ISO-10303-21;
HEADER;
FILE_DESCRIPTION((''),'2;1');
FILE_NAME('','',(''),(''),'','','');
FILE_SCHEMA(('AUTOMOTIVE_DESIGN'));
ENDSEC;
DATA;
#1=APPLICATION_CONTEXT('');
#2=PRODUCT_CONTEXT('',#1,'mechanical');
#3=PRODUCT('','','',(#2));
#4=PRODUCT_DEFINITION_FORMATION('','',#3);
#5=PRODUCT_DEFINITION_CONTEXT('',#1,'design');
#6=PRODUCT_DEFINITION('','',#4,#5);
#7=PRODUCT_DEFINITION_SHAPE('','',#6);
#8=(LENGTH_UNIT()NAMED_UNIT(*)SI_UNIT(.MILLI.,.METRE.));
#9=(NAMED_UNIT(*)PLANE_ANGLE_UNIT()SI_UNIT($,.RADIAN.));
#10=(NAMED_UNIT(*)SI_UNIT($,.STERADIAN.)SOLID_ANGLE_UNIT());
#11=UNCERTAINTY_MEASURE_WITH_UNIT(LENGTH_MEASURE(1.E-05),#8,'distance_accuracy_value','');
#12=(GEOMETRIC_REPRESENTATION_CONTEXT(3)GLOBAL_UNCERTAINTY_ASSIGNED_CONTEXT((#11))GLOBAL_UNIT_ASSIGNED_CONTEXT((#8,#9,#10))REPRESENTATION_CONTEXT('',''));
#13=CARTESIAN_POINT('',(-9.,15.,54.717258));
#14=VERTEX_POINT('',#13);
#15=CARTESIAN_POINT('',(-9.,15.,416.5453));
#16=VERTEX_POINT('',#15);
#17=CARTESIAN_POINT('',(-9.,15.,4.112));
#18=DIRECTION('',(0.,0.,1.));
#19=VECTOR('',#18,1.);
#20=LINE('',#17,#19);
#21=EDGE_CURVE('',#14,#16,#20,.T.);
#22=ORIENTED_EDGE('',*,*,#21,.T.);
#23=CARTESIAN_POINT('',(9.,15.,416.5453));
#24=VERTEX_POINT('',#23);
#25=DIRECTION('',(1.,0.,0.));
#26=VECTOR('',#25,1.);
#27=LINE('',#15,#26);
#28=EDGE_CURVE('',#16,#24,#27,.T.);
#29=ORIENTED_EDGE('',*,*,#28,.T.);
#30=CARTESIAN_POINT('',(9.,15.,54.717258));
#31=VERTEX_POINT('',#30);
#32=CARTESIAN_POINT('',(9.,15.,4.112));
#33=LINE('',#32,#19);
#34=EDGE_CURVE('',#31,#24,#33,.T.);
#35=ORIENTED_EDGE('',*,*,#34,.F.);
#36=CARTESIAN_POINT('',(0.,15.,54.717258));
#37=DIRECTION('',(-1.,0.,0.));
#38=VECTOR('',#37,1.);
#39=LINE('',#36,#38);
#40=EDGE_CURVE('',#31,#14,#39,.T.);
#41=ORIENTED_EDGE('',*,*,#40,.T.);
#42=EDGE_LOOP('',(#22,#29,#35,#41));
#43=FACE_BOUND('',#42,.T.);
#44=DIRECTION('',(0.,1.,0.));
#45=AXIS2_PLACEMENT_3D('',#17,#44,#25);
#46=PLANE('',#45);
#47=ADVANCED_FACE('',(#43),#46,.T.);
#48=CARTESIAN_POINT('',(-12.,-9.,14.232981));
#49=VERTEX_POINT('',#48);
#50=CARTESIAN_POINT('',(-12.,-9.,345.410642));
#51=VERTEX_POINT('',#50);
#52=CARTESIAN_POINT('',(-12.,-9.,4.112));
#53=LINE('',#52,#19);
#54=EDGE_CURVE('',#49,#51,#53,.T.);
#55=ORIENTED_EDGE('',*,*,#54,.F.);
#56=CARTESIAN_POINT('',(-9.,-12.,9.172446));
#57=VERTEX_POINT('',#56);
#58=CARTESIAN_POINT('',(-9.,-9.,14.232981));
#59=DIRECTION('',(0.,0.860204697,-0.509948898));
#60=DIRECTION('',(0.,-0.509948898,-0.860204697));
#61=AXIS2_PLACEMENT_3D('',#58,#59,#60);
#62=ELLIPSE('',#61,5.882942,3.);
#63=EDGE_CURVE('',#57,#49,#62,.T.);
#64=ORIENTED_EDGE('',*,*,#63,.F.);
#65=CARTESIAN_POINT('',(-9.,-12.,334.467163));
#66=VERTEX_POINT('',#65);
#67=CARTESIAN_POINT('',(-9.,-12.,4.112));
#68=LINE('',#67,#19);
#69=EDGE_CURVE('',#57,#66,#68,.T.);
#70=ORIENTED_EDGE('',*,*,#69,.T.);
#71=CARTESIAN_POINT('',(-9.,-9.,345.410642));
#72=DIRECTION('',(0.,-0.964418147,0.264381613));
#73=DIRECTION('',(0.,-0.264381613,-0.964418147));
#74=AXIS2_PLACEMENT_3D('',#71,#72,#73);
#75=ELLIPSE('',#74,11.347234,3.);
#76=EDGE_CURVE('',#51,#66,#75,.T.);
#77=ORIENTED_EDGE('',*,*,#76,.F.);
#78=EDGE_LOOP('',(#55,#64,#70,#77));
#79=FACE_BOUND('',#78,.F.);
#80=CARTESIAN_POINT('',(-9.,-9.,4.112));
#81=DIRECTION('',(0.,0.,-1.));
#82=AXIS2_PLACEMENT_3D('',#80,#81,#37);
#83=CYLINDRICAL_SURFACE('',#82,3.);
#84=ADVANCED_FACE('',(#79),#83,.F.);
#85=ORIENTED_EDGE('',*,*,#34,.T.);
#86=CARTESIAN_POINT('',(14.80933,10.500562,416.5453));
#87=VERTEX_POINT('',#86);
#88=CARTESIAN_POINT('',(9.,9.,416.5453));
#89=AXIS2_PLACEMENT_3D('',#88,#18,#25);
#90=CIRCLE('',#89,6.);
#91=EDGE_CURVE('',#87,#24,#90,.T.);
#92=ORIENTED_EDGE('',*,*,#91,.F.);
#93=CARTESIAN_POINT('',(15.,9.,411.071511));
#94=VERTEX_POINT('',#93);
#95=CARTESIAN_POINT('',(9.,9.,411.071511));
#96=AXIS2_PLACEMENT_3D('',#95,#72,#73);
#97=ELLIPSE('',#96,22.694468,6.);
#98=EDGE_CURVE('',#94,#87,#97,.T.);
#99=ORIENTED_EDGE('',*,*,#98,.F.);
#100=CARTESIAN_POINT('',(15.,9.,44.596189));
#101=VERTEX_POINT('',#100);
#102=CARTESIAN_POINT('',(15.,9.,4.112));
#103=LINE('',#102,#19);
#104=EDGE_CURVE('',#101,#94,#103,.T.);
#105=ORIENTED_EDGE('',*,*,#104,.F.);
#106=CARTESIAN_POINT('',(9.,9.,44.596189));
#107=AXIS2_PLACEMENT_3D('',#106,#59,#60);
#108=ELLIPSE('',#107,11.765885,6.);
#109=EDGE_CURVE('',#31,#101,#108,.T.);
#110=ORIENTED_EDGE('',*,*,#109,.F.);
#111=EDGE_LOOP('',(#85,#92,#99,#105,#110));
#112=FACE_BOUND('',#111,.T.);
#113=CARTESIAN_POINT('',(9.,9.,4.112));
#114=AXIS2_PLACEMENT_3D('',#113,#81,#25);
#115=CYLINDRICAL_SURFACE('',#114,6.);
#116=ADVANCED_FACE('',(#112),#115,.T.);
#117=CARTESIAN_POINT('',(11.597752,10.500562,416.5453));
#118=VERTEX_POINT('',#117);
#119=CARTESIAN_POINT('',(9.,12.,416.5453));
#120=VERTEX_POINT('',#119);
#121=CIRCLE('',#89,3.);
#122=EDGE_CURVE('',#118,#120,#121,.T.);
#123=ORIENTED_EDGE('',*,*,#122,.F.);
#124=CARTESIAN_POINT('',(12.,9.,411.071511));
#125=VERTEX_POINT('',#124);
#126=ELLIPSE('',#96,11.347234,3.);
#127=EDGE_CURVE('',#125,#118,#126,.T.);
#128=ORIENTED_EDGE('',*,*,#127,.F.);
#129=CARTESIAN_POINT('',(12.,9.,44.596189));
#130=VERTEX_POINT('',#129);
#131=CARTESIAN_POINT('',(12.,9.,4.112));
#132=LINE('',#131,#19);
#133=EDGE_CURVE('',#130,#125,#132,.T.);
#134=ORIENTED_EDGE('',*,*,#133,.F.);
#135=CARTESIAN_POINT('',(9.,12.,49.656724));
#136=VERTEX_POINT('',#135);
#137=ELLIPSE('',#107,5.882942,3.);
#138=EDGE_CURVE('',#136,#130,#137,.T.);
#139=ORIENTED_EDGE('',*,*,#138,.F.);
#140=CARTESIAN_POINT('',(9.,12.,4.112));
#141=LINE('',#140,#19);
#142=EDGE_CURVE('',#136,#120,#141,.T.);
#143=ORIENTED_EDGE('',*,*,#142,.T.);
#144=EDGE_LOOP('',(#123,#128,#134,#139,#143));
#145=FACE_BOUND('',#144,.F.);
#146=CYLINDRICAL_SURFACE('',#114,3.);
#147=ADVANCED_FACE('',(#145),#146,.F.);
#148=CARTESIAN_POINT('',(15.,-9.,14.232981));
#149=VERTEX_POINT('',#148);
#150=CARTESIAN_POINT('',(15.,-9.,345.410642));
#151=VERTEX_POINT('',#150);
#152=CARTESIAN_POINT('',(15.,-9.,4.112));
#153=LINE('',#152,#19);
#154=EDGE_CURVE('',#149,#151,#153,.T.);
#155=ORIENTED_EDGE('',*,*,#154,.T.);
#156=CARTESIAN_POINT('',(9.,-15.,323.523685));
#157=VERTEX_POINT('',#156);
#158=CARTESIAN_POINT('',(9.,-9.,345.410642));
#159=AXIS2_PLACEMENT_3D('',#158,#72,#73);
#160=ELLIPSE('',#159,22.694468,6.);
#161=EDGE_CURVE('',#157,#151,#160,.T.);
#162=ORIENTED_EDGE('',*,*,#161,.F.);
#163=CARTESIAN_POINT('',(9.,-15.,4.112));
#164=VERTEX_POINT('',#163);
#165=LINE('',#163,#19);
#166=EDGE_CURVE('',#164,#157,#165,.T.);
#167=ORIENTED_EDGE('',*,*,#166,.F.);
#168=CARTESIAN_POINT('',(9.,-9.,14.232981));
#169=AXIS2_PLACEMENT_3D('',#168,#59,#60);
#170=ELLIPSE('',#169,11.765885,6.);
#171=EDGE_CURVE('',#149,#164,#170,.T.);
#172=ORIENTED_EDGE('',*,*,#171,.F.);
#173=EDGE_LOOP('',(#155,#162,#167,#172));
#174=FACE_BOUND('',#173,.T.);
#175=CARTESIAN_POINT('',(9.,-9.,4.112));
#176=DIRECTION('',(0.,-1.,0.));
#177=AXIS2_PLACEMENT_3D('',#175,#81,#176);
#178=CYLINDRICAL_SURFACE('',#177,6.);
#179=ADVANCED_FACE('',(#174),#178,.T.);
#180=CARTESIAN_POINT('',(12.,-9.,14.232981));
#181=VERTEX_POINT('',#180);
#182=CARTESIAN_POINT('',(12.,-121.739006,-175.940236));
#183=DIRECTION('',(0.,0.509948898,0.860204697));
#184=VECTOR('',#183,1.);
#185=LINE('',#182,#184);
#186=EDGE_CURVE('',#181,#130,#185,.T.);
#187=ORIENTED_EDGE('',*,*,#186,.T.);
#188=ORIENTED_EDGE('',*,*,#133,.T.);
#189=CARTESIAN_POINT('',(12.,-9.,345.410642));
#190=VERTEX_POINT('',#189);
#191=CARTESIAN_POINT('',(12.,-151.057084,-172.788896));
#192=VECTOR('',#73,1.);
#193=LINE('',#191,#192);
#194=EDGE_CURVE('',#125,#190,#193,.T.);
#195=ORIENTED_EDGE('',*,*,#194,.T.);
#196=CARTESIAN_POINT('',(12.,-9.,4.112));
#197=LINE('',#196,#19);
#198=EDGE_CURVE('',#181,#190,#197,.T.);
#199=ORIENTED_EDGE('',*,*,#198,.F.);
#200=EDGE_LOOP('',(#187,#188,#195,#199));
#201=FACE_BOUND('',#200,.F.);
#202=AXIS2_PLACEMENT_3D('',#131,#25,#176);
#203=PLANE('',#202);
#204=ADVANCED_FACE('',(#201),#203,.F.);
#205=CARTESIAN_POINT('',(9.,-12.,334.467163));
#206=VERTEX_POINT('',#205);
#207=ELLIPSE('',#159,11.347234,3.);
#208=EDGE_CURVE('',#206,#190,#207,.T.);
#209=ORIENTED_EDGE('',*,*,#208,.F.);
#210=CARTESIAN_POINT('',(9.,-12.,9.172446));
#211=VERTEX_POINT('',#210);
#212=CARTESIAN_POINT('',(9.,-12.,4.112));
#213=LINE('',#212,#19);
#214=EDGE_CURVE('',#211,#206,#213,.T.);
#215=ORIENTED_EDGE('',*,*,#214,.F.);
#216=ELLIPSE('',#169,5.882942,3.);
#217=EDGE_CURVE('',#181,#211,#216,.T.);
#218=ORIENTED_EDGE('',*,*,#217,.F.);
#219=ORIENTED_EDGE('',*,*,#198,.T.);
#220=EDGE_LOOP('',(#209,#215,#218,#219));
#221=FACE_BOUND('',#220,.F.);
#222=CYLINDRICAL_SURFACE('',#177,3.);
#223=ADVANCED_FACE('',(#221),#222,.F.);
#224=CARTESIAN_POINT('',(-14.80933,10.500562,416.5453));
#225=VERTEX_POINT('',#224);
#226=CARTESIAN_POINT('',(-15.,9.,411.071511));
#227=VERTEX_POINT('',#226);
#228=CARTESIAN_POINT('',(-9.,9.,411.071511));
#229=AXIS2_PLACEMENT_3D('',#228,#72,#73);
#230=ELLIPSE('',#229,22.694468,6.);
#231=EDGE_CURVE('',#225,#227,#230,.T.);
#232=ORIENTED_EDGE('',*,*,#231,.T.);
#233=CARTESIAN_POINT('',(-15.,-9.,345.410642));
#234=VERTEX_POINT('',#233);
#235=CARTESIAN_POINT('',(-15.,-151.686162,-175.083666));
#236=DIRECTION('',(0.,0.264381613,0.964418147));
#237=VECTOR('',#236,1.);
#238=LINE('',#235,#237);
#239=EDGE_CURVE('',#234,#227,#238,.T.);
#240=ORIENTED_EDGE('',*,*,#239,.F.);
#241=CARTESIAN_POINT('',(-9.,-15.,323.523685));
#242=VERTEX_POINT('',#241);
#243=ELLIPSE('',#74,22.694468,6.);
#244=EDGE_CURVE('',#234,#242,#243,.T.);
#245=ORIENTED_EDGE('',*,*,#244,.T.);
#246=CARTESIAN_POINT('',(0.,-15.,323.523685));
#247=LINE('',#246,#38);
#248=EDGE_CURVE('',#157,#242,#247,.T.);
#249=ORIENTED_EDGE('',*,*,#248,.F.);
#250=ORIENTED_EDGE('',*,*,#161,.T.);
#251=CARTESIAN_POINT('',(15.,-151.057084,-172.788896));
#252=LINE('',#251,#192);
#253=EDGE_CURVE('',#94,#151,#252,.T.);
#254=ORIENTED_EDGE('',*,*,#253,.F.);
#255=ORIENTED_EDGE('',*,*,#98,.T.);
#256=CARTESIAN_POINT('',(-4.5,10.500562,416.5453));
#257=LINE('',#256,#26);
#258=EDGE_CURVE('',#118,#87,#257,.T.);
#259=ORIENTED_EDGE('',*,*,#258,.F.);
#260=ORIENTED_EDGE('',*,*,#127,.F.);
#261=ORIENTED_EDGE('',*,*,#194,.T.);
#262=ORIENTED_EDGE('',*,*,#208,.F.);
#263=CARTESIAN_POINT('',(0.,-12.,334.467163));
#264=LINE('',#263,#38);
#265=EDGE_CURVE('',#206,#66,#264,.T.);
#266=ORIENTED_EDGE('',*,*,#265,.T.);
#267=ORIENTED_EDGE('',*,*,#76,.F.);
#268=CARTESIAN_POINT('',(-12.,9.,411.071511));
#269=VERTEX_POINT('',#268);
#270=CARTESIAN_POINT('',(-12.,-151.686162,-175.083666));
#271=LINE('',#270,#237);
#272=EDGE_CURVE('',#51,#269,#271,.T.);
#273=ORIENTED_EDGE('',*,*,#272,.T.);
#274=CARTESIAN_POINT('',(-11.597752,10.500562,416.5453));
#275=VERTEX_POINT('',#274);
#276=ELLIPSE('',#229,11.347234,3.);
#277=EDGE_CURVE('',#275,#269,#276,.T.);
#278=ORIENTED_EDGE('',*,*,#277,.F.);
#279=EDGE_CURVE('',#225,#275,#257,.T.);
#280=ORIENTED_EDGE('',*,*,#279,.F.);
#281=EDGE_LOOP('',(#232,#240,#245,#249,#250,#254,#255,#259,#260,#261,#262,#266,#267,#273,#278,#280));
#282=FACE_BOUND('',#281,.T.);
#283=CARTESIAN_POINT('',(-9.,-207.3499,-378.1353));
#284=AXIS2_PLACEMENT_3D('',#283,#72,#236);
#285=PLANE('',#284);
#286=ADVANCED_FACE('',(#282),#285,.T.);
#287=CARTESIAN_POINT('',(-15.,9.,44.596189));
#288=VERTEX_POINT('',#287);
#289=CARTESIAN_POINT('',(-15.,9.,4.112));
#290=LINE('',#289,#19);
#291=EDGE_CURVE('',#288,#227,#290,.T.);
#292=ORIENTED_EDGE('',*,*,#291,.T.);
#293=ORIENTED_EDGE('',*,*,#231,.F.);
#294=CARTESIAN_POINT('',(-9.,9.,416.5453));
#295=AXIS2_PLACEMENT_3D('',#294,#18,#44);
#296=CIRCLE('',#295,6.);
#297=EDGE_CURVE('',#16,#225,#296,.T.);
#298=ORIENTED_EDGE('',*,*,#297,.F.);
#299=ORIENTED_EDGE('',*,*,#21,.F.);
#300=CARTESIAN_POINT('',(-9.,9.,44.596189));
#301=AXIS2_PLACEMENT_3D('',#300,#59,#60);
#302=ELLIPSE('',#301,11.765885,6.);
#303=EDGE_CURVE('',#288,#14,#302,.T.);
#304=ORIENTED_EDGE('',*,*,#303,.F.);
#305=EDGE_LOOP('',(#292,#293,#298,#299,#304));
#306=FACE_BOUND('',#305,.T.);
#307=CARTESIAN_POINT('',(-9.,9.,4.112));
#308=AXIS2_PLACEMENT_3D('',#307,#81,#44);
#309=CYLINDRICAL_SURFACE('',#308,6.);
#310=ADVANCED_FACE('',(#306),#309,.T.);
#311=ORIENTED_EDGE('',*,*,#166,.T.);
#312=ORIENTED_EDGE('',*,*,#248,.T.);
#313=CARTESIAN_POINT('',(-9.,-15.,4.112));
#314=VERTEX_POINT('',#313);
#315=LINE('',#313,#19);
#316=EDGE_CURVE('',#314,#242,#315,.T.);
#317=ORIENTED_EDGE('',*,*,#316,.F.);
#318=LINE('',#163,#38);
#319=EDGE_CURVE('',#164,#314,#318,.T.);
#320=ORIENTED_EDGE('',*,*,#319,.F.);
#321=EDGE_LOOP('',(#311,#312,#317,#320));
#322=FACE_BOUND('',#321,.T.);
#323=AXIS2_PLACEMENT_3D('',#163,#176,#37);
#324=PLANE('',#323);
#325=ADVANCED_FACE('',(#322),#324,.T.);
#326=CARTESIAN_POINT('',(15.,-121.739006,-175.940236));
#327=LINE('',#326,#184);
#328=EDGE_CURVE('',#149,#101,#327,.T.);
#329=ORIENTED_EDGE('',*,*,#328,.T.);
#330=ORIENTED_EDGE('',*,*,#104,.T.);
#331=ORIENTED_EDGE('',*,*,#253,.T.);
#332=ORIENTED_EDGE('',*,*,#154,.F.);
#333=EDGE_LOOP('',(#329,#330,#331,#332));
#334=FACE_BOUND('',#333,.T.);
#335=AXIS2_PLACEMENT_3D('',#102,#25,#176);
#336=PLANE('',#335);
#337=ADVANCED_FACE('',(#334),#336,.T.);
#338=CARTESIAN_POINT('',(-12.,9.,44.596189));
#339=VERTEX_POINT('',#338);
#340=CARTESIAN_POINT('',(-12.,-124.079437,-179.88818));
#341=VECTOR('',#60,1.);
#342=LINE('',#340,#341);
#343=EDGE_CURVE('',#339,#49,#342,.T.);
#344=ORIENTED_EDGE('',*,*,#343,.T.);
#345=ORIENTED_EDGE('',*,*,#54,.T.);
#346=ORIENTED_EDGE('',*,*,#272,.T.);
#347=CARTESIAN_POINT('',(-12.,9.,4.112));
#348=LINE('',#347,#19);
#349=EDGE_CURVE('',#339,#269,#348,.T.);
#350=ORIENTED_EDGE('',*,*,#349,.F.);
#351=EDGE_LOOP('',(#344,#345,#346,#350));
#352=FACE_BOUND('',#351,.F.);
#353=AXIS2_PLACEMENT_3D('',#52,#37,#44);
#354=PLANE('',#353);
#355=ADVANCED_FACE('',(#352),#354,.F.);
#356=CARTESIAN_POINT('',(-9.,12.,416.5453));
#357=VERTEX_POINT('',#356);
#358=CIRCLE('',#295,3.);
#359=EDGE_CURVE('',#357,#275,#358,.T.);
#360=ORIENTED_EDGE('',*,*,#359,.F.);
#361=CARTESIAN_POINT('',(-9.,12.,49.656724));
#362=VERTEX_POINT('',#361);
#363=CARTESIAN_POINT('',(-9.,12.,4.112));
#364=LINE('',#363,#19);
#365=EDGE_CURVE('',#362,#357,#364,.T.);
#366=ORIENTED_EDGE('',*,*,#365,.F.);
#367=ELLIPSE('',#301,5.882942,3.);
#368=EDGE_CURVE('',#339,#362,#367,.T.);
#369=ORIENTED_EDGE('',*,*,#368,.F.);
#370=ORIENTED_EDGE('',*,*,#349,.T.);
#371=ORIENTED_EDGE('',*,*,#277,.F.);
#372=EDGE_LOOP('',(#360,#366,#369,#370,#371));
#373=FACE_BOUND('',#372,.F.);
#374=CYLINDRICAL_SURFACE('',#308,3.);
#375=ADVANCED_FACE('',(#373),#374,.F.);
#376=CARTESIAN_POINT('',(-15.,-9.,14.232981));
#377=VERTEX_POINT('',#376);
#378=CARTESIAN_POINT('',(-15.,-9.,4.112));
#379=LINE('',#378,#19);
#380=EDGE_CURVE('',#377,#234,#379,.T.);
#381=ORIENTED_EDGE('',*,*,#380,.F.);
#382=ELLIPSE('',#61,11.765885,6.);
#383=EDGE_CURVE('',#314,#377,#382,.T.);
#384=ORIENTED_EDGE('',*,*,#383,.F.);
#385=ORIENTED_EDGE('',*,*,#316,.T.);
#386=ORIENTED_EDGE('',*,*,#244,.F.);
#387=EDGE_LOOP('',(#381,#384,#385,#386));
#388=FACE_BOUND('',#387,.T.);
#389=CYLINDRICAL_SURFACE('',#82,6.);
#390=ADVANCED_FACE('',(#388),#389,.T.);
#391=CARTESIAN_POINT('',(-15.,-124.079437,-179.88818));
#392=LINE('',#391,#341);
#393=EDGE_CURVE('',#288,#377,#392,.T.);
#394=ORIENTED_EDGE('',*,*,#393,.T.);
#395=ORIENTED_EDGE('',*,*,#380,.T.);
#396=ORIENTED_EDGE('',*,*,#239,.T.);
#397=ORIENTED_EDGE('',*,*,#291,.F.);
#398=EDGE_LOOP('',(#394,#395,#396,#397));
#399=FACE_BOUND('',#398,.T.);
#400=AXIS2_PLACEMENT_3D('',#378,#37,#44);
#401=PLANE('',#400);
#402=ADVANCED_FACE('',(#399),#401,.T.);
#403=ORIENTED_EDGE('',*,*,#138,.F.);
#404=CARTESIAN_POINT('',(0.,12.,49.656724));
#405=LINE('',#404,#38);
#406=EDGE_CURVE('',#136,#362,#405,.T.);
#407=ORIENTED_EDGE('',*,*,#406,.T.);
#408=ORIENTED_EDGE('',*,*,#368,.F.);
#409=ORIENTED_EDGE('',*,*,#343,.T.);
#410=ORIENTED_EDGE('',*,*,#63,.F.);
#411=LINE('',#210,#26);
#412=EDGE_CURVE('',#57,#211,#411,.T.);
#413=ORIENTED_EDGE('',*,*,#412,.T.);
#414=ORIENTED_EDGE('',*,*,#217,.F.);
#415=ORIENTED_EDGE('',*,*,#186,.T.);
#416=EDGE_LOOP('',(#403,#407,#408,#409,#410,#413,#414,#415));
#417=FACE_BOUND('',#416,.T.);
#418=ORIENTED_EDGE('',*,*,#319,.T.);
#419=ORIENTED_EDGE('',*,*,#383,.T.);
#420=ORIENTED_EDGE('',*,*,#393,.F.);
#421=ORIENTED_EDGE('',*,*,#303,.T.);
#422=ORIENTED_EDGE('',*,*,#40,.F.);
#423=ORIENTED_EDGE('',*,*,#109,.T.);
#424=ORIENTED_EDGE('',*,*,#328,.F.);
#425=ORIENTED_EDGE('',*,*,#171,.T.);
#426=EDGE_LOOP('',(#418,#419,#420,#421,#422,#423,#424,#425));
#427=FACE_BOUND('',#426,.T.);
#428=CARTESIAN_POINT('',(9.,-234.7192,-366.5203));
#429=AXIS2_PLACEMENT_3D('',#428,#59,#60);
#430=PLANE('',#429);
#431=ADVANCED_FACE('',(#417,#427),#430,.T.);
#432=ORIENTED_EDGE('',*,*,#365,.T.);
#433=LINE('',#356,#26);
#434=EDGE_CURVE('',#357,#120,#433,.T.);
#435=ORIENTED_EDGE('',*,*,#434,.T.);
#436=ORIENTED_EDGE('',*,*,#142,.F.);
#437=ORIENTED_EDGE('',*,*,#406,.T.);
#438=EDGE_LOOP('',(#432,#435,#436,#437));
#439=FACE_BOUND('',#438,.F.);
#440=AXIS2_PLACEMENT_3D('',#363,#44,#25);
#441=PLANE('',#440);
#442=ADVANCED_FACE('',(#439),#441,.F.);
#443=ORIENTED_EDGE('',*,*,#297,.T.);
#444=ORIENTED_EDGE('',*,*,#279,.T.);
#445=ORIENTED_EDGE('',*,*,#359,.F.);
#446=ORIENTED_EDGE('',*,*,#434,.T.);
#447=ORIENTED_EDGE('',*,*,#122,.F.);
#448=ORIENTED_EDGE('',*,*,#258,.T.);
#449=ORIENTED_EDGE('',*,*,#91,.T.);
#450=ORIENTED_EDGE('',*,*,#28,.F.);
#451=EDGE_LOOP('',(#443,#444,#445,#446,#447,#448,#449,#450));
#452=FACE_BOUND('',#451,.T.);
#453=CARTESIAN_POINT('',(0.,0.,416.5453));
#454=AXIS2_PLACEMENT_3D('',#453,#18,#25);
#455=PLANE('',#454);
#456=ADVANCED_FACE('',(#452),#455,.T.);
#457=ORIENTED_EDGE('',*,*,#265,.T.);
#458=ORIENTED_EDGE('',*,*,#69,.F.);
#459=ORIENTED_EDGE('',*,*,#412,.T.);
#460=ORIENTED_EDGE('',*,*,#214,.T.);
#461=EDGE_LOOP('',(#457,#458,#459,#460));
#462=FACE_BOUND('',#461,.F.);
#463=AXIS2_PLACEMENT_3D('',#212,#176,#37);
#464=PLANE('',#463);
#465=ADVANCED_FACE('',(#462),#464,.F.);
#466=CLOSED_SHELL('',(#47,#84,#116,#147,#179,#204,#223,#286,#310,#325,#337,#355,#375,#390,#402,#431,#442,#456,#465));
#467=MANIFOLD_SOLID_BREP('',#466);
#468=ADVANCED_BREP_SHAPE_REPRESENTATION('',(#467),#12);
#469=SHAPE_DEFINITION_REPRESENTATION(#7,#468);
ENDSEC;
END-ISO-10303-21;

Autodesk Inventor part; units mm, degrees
ref_plane "Start Plane" through (0, 0, 4.112) normal (0, 0, 1) x (1, 0, 0)
ref_plane "End Plane" through (0, 0, 416.5453) normal (0, 0, 1) x (1, 0, 0)
sketch "Sketch" plane through (0, 0, 0) normal (0, 0, 1) x (1, 0, 0)
  line L0 (-15, -9) -> (-15, 9)
  line L1 (-9, 15) -> (9, 15)
  line L2 (15, 9) -> (15, -9)
  line L3 (9, -15) -> (-9, -15)
  arc A0 (-15, -9) -> (-9, -15) centre (-9, -9) ccw
  arc A1 (-9, 15) -> (-15, 9) centre (-9, 9) ccw
  arc A2 (15, 9) -> (9, 15) centre (9, 9) ccw
  arc A3 (9, -15) -> (15, -9) centre (9, -9) ccw
  arc A4 (-9, 12) -> (-12, 9) centre (-9, 9) ccw
  line L4 (-9, 12) -> (9, 12)
  arc A5 (12, 9) -> (9, 12) centre (9, 9) ccw
  line L5 (12, 9) -> (12, -9)
  arc A6 (9, -12) -> (12, -9) centre (9, -9) ccw
  line L6 (9, -12) -> (-9, -12)
  arc A7 (-12, -9) -> (-9, -12) centre (-9, -9) ccw
  line L7 (-12, -9) -> (-12, 9)
  line L8 (0, 22.7397) -> (0, -22.7397) construction
  line L9 (-22.7397, 0) -> (22.7397, 0) construction
  dimension "d7" = 6
  dimension "d10" = 30
  dimension "d11" = 30
  dimension "d12" = 3
  dimension "d15" = 15
  dimension "d16" = 15
extrude "Body" add sketch "Sketch" along normal up to surface (412.4333 mm away) from surface at 4.112
sketch "Sketch3" plane through (0, 0, 0) normal (0, 0, 1) x (1, 0, 0)
  line L0 (0, 0) -> (10, 0)
ref_plane "Work Plane3" through (0, 0, 0) normal (0, -1, 0) x (1, 0, 0)
ref_plane "Work Plane4" through (-9, -207.3499, -378.1353) normal (0, -0.9644181, 0.2643816) x (1, 0, 0)
split "Split1" plane through (-9, -207.3499, -378.1353) removes the side toward (0, -0.9644181, 0.2643816)
ref_plane "Work Plane5" through (9, -234.7192, -366.5203) normal (0, 0.8602047, -0.5099489) x (1, 0, 0)
split "Split2" plane through (9, -234.7192, -366.5203) removes the side toward (0, 0.8602047, -0.5099489)
sketch "Sketch4" plane through (0, 0, 0) normal (0, -1, 0) x (1, 0, 0)
  line L0 (-2, 4.112) -> (12, 4.112) projected
  line L1 (-2, 416.5453) -> (12, 416.5453) projected
  dimension "d18" = 412.4333
equation "\"d7\" = G_IR"
equation "\"d10\" = G_H"
equation "\"d11\" = G_W"
equation "\"d12\" = G_T"
equation "\"d15\" = 0.5 * d10"
equation "\"d16\" = 0.5 * d11"
equation "\"d3\" = G_L"
equation "\"G_W\" = 30"
equation "\"G_H\" = 30"
equation "\"G_T\" = 3"
equation "\"G_IR\" = 6"
equation "\"G_L\" = d18"
equation "\"G_OFFSET_START\" = -4.11204"
equation "\"G_OFFSET_END\" = -18.432"
equation "\"d13\" = -G_OFFSET_START"
equation "\"d14\" = G_OFFSET_END + B_L"
equation "\"B_L\" = 434.9773"
properties part number "DIN EN 10219-2 - 30 x 30 x 3  - 412.43" material "Steel, Mild"
